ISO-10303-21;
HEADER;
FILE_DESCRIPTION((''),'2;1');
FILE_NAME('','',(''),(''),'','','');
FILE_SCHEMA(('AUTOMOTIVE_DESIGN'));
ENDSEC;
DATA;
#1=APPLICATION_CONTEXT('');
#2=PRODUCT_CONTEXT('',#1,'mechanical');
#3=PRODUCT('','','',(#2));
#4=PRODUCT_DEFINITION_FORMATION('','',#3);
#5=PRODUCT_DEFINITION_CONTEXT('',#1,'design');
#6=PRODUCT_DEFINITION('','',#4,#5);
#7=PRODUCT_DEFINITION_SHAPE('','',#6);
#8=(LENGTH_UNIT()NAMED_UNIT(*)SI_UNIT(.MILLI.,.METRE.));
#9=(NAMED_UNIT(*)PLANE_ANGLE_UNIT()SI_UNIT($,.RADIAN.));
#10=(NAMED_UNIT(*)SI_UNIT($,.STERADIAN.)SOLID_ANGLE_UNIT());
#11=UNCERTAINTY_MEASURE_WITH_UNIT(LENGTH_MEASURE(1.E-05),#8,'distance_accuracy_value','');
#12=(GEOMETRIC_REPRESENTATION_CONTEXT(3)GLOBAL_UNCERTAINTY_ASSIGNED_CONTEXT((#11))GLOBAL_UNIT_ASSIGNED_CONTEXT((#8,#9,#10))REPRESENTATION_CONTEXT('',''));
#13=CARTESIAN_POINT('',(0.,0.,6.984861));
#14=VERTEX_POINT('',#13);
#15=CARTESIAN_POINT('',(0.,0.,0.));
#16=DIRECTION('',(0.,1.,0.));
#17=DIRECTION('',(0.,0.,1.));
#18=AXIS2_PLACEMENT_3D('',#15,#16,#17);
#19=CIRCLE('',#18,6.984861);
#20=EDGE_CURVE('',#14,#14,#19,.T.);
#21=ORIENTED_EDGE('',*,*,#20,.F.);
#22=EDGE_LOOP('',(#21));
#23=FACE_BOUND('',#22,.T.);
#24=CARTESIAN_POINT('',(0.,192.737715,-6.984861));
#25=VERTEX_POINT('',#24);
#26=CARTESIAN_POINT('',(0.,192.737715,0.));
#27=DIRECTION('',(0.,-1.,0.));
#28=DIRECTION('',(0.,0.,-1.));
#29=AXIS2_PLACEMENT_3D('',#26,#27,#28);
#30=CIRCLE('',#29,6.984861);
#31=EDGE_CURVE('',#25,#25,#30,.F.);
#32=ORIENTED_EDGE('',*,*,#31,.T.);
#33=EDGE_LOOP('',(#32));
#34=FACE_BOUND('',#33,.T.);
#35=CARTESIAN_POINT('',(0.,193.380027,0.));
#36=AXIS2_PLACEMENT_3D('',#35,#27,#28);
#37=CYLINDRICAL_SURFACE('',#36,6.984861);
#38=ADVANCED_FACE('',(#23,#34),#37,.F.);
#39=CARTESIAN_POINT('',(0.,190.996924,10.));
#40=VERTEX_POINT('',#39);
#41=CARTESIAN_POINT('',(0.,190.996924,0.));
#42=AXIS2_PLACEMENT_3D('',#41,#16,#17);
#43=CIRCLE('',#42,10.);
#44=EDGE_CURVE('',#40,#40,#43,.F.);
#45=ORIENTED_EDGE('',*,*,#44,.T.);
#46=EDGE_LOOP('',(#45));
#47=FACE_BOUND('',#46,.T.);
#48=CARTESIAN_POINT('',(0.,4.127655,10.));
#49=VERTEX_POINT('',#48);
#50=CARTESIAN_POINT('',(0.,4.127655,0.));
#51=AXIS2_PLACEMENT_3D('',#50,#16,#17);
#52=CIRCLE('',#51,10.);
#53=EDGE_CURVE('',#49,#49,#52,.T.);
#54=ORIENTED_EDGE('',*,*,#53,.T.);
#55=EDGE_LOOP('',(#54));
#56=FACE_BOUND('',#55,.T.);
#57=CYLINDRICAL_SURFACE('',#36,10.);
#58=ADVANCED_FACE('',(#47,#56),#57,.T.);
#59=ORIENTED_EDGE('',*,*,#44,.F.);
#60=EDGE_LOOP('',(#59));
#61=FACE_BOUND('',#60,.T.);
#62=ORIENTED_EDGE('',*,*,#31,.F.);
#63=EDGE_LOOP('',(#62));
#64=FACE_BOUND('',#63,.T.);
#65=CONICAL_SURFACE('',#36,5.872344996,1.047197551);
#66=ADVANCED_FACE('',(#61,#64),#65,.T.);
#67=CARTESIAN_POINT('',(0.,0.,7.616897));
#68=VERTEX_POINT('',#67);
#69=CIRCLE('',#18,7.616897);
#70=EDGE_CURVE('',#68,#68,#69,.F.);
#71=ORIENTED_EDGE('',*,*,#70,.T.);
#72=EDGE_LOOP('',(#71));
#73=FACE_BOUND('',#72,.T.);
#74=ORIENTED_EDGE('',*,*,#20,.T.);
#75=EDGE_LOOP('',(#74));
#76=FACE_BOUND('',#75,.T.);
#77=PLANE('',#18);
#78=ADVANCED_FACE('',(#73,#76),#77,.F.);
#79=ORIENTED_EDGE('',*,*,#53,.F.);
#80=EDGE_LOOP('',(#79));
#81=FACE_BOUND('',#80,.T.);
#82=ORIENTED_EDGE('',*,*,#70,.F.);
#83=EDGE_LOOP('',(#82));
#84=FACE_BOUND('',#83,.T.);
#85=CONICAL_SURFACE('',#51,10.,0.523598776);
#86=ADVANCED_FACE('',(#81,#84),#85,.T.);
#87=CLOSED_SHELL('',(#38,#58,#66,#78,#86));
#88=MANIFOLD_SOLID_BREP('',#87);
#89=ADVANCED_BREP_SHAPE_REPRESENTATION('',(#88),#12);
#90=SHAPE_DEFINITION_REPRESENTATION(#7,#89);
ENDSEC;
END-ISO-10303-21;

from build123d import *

# Parameters (mm, degrees)
SKETCH1_R           = 10
BOSS_EXTRUDE1_DEPTH = 193.380027
SKETCH2_R           = 6.984860876
CUT_EXTRUDE1_DEPTH  = 194.896453919
CHAMFER1_SIZE       = 2.383103
CHAMFER1_SIZE_2     = 4.127655


with BuildPart() as part:
    # Sketch1 → Boss-Extrude1 (new body)
    with BuildSketch(Plane(origin=(0, 0, 0), x_dir=(1, 0, 0), z_dir=(0, 1, 0))):
        with Locations(Location((0, 0, 0), (0, 0, 270))):
            Circle(SKETCH1_R)
    extrude(amount=BOSS_EXTRUDE1_DEPTH)

    # Sketch2 → Cut-Extrude1 (cut, through all)
    with BuildSketch(Plane(origin=(0, 0, 0), x_dir=(1, 0, 0), z_dir=(0, 1, 0))):
        with Locations(Location((0, 0, 0), (0, 0, 270))):
            Circle(SKETCH2_R)
    extrude(amount=CUT_EXTRUDE1_DEPTH, mode=Mode.SUBTRACT)

    # Chamfer1
    # the kernel refuses this chamfer: 4.127655, 2.383103 mm, written as the material it takes off along each edge
    with BuildSketch(Plane(origin=(0, 193.380027, 0), x_dir=(0, 0, 1), z_dir=(-1, 0, 0))) as chamfer1_piece_1:
        Polygon((10, -CHAMFER1_SIZE), (10 - CHAMFER1_SIZE_2, 0), (10, 0), align=None)
    revolve(axis=Axis((0, 193.380027, 0), (0, 1, 0)), mode=Mode.SUBTRACT)
    with BuildSketch(Plane(origin=(0, 0, 0), x_dir=(0, 0, 1), z_dir=(-1, 0, 0))) as chamfer1_piece_2:
        Polygon((10, CHAMFER1_SIZE_2), (10 - CHAMFER1_SIZE, 0), (10, 0), align=None)
    revolve(axis=Axis((0, 0, 0), (0, 1, 0)), mode=Mode.SUBTRACT)


solid = part.part
